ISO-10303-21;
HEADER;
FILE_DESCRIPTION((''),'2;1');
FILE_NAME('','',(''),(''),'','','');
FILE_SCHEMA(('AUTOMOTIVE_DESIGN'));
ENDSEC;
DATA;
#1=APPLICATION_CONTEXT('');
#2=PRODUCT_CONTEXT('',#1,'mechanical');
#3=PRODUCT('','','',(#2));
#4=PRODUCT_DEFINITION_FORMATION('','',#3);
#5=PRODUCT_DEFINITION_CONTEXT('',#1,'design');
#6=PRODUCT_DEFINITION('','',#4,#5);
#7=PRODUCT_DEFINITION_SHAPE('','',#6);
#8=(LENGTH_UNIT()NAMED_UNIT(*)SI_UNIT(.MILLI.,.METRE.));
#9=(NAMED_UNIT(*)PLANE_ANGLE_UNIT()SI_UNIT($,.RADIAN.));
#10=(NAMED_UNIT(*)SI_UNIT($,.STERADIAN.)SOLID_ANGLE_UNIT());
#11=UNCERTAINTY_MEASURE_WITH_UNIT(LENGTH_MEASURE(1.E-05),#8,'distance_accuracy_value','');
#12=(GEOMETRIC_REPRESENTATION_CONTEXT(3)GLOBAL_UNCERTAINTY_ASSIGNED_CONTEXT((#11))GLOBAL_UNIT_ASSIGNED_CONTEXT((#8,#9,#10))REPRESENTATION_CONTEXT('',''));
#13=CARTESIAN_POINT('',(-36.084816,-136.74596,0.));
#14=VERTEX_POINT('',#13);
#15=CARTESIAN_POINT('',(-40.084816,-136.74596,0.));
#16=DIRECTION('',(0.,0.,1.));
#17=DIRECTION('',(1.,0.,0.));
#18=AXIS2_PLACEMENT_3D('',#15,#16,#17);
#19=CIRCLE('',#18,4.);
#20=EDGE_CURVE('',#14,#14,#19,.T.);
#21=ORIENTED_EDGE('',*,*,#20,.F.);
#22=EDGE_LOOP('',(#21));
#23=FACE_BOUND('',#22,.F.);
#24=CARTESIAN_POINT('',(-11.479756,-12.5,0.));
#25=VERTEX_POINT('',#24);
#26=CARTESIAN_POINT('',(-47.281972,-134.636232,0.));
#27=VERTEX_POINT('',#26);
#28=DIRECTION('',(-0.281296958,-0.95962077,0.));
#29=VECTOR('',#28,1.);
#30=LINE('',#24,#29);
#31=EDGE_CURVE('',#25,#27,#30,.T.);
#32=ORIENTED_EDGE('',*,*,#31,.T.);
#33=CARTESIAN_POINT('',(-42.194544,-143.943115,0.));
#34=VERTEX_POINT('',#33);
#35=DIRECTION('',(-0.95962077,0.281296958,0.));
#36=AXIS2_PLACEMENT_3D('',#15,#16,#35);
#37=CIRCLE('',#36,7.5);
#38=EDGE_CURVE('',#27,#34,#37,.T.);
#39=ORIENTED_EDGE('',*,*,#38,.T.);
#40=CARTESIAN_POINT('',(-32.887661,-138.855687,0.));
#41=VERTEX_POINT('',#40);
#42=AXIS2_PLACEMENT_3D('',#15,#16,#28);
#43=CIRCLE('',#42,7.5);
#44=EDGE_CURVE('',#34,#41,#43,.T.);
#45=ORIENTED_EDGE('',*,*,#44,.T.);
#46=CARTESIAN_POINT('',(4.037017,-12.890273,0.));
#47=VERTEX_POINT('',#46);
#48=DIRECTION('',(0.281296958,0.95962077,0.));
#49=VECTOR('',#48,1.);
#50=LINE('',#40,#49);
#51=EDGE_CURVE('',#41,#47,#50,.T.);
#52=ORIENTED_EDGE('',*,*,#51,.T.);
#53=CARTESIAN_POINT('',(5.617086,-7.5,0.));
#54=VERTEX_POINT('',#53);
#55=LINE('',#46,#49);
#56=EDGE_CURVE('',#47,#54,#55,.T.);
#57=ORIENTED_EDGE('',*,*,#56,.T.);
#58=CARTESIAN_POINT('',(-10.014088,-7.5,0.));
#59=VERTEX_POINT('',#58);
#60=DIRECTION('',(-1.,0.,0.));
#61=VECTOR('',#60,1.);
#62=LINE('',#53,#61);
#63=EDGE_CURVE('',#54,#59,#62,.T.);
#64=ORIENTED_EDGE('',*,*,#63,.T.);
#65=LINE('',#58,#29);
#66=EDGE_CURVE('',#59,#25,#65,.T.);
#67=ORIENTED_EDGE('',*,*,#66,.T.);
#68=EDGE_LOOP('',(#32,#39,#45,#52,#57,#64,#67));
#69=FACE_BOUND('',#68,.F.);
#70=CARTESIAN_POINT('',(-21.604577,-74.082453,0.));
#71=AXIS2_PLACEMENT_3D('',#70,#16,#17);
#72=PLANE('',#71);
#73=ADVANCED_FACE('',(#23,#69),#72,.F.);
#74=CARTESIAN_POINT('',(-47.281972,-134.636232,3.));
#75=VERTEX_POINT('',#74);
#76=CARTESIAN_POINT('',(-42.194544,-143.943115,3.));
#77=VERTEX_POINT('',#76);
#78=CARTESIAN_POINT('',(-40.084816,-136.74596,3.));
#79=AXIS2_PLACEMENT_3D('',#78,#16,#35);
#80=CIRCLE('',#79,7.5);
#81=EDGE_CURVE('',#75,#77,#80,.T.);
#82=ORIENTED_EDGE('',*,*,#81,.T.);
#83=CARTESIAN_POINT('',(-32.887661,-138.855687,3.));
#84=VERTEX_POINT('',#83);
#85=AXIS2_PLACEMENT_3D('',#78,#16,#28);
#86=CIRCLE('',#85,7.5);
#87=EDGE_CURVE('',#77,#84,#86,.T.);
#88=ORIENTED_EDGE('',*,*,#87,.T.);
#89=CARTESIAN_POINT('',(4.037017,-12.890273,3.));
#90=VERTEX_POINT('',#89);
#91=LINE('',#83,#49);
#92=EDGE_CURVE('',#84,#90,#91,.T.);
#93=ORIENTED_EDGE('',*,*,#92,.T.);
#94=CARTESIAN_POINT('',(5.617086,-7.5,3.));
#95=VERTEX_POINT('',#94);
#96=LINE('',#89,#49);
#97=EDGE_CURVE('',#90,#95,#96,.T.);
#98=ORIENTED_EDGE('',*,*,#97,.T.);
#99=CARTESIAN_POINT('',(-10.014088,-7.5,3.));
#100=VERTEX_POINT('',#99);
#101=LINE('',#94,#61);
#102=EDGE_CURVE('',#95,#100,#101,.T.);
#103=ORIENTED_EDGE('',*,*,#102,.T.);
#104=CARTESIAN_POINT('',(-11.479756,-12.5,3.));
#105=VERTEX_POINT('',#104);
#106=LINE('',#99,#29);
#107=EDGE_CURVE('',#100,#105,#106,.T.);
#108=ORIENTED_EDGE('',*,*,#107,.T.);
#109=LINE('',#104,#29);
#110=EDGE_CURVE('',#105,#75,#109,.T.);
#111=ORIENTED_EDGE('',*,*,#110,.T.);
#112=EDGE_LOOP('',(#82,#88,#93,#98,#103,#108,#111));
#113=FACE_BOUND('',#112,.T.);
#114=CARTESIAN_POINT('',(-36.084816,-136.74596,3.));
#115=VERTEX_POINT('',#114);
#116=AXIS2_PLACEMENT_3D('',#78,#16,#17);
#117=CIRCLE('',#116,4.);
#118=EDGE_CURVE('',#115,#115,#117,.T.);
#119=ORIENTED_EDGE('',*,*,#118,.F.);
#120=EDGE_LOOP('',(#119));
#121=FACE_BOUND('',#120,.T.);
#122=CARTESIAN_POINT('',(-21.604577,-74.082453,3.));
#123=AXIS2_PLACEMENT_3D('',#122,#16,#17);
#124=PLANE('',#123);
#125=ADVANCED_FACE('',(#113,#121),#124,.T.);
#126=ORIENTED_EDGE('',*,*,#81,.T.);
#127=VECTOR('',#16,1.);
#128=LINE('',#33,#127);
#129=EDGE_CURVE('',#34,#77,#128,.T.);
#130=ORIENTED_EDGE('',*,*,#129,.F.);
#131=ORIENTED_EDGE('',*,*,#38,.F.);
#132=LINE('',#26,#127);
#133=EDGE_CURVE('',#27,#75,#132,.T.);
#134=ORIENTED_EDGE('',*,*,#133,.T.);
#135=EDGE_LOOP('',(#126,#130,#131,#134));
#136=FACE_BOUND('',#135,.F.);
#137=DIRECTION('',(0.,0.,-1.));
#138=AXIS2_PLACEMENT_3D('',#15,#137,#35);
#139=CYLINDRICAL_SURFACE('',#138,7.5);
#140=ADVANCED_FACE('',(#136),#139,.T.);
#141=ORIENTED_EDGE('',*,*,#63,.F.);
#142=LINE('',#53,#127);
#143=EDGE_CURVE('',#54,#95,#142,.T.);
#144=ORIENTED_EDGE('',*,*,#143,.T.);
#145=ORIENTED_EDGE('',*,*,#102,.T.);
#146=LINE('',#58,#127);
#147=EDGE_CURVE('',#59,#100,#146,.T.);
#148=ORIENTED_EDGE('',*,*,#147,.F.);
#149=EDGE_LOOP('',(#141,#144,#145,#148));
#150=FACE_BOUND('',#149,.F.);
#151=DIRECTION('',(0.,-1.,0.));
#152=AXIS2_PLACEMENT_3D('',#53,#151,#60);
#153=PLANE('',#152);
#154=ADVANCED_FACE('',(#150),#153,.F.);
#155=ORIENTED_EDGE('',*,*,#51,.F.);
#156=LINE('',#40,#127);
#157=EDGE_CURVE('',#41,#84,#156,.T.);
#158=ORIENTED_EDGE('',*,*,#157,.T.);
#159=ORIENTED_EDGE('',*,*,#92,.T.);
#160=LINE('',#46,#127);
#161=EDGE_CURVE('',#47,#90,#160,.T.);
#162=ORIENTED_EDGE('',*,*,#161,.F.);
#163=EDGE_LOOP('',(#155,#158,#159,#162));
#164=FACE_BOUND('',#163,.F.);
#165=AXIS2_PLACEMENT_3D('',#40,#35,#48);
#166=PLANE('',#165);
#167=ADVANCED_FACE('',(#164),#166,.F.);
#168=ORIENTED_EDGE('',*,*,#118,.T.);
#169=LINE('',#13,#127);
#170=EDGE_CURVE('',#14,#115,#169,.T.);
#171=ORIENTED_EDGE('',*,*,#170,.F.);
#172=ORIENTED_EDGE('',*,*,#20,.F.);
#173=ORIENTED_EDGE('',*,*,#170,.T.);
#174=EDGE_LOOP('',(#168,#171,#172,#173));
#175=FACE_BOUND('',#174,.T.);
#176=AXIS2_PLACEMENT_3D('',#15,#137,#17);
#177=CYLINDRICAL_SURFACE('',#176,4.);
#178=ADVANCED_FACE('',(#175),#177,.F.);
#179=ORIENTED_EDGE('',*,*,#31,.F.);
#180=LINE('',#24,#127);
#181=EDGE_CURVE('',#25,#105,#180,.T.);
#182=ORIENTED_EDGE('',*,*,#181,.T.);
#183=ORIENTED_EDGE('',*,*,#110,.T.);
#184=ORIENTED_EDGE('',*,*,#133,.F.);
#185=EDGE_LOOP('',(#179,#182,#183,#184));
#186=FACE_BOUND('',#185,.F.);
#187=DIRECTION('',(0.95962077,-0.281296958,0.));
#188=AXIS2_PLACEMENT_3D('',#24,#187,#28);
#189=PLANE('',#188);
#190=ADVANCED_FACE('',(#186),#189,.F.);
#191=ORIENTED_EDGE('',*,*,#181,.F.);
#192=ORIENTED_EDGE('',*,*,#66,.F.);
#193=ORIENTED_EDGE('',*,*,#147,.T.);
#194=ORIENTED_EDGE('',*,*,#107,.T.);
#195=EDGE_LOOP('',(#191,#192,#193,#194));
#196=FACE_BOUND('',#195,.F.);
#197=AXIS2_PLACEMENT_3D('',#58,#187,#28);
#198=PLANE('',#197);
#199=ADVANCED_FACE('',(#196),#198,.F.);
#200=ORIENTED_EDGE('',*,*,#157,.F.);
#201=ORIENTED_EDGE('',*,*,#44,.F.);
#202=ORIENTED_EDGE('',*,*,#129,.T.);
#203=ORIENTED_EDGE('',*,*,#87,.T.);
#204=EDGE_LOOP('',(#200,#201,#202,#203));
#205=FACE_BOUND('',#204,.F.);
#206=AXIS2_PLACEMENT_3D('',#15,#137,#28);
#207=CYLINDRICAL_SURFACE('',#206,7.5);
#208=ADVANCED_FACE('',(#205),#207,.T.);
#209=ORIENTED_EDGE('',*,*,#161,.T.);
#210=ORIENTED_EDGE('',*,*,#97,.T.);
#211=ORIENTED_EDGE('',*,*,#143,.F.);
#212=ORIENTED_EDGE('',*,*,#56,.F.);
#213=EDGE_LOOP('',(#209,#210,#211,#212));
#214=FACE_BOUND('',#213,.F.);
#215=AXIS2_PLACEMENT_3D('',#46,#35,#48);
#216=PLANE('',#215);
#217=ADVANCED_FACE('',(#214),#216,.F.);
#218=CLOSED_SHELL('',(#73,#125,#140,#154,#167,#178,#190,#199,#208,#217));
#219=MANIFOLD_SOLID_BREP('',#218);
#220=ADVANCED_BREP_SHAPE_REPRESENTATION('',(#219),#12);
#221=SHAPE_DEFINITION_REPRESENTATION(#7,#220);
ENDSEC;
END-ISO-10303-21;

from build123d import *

# Parameters (mm, degrees)
F0_R     = 4
F1_DEPTH = 3


# Not quite as in the source:
# - a feature names something its author has since deleted; it is built from what else it names


with BuildPart() as f1:
    # F0 (on Top) → F1 (new body)
    with BuildSketch(Plane.XY):
        with BuildLine():
            Line((-11.4797556719, -12.5), (-47.2819722649, -134.6362324887))
            ThreePointArc((-47.2819722649, -134.6362324887), (-46.6657765426, -140.3433149262), (-42.1945436765, -143.9431154447))
            ThreePointArc((-42.1945436765, -143.9431154447), (-36.487461239, -143.3269197224), (-32.8876607204, -138.8556868563))
            Line((-32.8876607204, -138.8556868563), (4.0370171151, -12.8902728162))
            Line((4.0370171151, -12.8902728162), (5.6170864437, -7.5))
            Line((5.6170864437, -7.5), (-10.0140883648, -7.5))
            Line((-10.0140883648, -7.5), (-11.4797556719, -12.5))
        make_face()
        with Locations((-40.0848164926, -136.7459596725)):
            Circle(F0_R, mode=Mode.SUBTRACT)
    extrude(amount=F1_DEPTH)


solid = f1.part
